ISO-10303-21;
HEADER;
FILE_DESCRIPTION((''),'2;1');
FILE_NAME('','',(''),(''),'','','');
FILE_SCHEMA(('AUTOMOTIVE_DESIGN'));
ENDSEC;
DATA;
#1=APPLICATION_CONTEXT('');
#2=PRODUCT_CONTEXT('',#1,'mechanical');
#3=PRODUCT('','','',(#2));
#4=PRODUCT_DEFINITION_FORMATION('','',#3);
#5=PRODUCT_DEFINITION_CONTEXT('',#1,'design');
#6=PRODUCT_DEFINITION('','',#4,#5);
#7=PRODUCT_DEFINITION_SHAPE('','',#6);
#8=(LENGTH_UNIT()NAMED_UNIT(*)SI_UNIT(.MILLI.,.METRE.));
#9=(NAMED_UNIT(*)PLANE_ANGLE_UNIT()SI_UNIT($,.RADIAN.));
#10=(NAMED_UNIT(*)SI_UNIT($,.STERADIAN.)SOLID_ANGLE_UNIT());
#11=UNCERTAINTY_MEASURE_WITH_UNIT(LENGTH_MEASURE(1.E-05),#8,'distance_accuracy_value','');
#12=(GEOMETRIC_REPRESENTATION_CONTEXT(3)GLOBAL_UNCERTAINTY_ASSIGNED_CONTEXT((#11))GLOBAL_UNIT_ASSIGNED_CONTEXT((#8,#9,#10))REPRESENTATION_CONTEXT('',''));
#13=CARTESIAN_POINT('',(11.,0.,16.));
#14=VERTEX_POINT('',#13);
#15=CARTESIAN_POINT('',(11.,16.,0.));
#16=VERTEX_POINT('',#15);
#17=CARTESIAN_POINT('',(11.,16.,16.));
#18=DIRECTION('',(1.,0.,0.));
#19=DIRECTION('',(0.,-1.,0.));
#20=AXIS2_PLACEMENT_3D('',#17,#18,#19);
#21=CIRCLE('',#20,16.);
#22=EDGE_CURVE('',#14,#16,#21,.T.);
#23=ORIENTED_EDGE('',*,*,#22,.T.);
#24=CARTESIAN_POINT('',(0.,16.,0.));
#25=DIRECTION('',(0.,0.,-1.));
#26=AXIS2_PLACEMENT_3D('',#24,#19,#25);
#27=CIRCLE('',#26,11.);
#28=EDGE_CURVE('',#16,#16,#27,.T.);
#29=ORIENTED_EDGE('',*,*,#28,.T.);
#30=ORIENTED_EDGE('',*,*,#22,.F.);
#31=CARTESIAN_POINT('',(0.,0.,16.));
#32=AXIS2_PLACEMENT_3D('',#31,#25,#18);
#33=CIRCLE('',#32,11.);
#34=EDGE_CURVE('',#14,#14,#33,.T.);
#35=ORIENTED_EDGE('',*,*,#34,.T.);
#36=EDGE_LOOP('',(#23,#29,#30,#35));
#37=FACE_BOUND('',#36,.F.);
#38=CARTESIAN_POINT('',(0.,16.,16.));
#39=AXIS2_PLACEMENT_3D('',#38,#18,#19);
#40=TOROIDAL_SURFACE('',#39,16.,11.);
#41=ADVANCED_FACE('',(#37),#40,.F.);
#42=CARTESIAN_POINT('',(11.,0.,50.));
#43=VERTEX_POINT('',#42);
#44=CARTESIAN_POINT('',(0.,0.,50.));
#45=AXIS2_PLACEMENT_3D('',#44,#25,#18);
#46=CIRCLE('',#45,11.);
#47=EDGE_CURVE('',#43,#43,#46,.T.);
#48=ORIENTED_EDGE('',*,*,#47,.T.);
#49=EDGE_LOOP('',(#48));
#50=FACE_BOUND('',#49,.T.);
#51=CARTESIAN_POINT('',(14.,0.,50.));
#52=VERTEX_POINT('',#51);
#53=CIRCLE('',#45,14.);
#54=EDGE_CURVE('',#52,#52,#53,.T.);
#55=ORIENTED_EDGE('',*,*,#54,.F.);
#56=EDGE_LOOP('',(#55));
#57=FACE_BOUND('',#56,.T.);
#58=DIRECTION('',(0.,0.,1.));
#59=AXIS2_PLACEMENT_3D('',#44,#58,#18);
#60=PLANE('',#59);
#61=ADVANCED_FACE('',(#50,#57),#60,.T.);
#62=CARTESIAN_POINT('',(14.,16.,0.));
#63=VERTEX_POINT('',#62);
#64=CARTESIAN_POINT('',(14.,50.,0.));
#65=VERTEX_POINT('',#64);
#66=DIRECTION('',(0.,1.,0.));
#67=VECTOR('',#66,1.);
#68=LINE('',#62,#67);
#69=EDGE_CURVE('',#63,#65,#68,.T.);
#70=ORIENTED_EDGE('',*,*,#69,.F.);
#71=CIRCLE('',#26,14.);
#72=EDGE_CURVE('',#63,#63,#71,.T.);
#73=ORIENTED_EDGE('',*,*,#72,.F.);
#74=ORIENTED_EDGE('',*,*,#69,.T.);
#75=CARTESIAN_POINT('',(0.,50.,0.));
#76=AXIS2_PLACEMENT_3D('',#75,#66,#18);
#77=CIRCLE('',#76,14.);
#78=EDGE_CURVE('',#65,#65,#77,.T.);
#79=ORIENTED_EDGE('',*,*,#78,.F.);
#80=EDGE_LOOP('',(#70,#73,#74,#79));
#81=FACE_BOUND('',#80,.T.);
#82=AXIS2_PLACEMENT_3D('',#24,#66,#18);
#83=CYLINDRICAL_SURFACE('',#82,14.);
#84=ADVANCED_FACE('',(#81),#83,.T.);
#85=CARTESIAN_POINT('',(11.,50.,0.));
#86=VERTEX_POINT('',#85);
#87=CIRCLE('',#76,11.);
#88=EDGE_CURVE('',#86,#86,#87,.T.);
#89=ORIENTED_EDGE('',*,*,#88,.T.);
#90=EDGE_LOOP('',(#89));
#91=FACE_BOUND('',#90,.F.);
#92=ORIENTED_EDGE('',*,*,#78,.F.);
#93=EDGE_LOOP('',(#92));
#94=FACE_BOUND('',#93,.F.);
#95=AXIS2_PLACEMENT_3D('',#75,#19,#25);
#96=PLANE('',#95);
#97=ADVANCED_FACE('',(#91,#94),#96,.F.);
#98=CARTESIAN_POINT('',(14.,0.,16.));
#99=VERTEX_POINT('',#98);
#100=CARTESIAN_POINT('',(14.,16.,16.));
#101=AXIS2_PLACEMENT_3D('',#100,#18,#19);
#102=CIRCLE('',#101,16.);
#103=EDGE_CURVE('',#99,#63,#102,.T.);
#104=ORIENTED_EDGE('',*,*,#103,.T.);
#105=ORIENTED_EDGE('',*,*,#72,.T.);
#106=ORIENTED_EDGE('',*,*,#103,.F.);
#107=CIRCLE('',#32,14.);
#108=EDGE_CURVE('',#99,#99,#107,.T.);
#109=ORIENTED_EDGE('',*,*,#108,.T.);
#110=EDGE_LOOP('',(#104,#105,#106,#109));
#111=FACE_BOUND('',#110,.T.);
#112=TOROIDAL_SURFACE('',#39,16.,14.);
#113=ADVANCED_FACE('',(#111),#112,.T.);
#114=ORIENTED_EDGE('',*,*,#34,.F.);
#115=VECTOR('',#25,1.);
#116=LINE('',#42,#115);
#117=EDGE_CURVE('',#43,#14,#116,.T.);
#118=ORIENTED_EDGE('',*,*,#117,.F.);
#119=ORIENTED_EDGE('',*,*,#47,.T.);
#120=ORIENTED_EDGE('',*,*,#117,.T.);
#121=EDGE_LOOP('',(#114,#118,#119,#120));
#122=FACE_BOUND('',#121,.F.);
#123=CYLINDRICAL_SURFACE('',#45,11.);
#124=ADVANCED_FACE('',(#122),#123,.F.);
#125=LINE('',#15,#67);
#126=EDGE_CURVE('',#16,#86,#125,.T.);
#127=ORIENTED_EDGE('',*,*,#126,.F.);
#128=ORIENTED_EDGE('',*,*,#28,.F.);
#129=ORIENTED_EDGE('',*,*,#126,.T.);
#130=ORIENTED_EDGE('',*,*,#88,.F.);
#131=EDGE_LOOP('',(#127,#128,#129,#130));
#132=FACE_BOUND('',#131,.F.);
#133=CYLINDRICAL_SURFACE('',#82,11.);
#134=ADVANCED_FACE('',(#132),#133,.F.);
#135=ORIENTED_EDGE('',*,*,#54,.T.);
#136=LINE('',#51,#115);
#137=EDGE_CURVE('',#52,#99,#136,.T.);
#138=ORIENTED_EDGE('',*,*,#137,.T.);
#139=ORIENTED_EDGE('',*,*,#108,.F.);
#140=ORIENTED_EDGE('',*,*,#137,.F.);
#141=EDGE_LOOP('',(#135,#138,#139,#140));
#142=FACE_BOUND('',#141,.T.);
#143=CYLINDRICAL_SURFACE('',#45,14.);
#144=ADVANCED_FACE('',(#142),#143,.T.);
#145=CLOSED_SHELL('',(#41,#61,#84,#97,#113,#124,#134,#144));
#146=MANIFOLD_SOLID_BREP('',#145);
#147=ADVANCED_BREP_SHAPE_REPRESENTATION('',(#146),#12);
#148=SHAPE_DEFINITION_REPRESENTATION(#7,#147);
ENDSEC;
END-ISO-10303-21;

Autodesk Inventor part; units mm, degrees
ref_plane "YZ Plane" through (0, 0, 0) normal (1, 0, 0) x (0, 1, 0)
ref_plane "Work Plane1" through (0, 0, 50) normal (0, 0, 1) x (1, 0, 0)
sketch "Sketch1" plane through (0, 0, 50) normal (0, 0, 1) x (1, 0, 0)
  circle A0 centre (0, 0) radius 14
  dimension "d1" = 28
ref_plane "Work Plane2" through (0, 50, 0) normal (0, 1, 0) x (-1, 0, 0)
sketch "Sketch2" plane through (0, 50, 0) normal (0, 1, 0) x (-1, 0, 0)
  circle A0 centre (0, 0) radius 14
  dimension "d3" = 28
sketch "Sketch3" plane through (0, 0, 0) normal (1, 0, 0) x (0, 1, 0)
  line L0 (50, -14) -> (50, 14) construction
  line L1 (14, 50) -> (-14, 50) construction
  line L2 (50, 0) -> (0, 0)
  line L3 (0, 50) -> (0, 0)
  line L4 (14, 50) -> (14, 16)
  line L5 (16, 14) -> (50, 14)
  arc A0 (14, 16) -> (16, 14) centre (16, 16) ccw
  dimension "d4" = 2
sweep "Sweep1" add profiles "Sketch1" path "Sketch3" path curves L4 A0 L5
shell "Shell1" thickness 3 removed faces 2 at (7.0627, 50, -5.5585) at (0.1834, -3.0946, 50)
properties part number "90º Elbow"
